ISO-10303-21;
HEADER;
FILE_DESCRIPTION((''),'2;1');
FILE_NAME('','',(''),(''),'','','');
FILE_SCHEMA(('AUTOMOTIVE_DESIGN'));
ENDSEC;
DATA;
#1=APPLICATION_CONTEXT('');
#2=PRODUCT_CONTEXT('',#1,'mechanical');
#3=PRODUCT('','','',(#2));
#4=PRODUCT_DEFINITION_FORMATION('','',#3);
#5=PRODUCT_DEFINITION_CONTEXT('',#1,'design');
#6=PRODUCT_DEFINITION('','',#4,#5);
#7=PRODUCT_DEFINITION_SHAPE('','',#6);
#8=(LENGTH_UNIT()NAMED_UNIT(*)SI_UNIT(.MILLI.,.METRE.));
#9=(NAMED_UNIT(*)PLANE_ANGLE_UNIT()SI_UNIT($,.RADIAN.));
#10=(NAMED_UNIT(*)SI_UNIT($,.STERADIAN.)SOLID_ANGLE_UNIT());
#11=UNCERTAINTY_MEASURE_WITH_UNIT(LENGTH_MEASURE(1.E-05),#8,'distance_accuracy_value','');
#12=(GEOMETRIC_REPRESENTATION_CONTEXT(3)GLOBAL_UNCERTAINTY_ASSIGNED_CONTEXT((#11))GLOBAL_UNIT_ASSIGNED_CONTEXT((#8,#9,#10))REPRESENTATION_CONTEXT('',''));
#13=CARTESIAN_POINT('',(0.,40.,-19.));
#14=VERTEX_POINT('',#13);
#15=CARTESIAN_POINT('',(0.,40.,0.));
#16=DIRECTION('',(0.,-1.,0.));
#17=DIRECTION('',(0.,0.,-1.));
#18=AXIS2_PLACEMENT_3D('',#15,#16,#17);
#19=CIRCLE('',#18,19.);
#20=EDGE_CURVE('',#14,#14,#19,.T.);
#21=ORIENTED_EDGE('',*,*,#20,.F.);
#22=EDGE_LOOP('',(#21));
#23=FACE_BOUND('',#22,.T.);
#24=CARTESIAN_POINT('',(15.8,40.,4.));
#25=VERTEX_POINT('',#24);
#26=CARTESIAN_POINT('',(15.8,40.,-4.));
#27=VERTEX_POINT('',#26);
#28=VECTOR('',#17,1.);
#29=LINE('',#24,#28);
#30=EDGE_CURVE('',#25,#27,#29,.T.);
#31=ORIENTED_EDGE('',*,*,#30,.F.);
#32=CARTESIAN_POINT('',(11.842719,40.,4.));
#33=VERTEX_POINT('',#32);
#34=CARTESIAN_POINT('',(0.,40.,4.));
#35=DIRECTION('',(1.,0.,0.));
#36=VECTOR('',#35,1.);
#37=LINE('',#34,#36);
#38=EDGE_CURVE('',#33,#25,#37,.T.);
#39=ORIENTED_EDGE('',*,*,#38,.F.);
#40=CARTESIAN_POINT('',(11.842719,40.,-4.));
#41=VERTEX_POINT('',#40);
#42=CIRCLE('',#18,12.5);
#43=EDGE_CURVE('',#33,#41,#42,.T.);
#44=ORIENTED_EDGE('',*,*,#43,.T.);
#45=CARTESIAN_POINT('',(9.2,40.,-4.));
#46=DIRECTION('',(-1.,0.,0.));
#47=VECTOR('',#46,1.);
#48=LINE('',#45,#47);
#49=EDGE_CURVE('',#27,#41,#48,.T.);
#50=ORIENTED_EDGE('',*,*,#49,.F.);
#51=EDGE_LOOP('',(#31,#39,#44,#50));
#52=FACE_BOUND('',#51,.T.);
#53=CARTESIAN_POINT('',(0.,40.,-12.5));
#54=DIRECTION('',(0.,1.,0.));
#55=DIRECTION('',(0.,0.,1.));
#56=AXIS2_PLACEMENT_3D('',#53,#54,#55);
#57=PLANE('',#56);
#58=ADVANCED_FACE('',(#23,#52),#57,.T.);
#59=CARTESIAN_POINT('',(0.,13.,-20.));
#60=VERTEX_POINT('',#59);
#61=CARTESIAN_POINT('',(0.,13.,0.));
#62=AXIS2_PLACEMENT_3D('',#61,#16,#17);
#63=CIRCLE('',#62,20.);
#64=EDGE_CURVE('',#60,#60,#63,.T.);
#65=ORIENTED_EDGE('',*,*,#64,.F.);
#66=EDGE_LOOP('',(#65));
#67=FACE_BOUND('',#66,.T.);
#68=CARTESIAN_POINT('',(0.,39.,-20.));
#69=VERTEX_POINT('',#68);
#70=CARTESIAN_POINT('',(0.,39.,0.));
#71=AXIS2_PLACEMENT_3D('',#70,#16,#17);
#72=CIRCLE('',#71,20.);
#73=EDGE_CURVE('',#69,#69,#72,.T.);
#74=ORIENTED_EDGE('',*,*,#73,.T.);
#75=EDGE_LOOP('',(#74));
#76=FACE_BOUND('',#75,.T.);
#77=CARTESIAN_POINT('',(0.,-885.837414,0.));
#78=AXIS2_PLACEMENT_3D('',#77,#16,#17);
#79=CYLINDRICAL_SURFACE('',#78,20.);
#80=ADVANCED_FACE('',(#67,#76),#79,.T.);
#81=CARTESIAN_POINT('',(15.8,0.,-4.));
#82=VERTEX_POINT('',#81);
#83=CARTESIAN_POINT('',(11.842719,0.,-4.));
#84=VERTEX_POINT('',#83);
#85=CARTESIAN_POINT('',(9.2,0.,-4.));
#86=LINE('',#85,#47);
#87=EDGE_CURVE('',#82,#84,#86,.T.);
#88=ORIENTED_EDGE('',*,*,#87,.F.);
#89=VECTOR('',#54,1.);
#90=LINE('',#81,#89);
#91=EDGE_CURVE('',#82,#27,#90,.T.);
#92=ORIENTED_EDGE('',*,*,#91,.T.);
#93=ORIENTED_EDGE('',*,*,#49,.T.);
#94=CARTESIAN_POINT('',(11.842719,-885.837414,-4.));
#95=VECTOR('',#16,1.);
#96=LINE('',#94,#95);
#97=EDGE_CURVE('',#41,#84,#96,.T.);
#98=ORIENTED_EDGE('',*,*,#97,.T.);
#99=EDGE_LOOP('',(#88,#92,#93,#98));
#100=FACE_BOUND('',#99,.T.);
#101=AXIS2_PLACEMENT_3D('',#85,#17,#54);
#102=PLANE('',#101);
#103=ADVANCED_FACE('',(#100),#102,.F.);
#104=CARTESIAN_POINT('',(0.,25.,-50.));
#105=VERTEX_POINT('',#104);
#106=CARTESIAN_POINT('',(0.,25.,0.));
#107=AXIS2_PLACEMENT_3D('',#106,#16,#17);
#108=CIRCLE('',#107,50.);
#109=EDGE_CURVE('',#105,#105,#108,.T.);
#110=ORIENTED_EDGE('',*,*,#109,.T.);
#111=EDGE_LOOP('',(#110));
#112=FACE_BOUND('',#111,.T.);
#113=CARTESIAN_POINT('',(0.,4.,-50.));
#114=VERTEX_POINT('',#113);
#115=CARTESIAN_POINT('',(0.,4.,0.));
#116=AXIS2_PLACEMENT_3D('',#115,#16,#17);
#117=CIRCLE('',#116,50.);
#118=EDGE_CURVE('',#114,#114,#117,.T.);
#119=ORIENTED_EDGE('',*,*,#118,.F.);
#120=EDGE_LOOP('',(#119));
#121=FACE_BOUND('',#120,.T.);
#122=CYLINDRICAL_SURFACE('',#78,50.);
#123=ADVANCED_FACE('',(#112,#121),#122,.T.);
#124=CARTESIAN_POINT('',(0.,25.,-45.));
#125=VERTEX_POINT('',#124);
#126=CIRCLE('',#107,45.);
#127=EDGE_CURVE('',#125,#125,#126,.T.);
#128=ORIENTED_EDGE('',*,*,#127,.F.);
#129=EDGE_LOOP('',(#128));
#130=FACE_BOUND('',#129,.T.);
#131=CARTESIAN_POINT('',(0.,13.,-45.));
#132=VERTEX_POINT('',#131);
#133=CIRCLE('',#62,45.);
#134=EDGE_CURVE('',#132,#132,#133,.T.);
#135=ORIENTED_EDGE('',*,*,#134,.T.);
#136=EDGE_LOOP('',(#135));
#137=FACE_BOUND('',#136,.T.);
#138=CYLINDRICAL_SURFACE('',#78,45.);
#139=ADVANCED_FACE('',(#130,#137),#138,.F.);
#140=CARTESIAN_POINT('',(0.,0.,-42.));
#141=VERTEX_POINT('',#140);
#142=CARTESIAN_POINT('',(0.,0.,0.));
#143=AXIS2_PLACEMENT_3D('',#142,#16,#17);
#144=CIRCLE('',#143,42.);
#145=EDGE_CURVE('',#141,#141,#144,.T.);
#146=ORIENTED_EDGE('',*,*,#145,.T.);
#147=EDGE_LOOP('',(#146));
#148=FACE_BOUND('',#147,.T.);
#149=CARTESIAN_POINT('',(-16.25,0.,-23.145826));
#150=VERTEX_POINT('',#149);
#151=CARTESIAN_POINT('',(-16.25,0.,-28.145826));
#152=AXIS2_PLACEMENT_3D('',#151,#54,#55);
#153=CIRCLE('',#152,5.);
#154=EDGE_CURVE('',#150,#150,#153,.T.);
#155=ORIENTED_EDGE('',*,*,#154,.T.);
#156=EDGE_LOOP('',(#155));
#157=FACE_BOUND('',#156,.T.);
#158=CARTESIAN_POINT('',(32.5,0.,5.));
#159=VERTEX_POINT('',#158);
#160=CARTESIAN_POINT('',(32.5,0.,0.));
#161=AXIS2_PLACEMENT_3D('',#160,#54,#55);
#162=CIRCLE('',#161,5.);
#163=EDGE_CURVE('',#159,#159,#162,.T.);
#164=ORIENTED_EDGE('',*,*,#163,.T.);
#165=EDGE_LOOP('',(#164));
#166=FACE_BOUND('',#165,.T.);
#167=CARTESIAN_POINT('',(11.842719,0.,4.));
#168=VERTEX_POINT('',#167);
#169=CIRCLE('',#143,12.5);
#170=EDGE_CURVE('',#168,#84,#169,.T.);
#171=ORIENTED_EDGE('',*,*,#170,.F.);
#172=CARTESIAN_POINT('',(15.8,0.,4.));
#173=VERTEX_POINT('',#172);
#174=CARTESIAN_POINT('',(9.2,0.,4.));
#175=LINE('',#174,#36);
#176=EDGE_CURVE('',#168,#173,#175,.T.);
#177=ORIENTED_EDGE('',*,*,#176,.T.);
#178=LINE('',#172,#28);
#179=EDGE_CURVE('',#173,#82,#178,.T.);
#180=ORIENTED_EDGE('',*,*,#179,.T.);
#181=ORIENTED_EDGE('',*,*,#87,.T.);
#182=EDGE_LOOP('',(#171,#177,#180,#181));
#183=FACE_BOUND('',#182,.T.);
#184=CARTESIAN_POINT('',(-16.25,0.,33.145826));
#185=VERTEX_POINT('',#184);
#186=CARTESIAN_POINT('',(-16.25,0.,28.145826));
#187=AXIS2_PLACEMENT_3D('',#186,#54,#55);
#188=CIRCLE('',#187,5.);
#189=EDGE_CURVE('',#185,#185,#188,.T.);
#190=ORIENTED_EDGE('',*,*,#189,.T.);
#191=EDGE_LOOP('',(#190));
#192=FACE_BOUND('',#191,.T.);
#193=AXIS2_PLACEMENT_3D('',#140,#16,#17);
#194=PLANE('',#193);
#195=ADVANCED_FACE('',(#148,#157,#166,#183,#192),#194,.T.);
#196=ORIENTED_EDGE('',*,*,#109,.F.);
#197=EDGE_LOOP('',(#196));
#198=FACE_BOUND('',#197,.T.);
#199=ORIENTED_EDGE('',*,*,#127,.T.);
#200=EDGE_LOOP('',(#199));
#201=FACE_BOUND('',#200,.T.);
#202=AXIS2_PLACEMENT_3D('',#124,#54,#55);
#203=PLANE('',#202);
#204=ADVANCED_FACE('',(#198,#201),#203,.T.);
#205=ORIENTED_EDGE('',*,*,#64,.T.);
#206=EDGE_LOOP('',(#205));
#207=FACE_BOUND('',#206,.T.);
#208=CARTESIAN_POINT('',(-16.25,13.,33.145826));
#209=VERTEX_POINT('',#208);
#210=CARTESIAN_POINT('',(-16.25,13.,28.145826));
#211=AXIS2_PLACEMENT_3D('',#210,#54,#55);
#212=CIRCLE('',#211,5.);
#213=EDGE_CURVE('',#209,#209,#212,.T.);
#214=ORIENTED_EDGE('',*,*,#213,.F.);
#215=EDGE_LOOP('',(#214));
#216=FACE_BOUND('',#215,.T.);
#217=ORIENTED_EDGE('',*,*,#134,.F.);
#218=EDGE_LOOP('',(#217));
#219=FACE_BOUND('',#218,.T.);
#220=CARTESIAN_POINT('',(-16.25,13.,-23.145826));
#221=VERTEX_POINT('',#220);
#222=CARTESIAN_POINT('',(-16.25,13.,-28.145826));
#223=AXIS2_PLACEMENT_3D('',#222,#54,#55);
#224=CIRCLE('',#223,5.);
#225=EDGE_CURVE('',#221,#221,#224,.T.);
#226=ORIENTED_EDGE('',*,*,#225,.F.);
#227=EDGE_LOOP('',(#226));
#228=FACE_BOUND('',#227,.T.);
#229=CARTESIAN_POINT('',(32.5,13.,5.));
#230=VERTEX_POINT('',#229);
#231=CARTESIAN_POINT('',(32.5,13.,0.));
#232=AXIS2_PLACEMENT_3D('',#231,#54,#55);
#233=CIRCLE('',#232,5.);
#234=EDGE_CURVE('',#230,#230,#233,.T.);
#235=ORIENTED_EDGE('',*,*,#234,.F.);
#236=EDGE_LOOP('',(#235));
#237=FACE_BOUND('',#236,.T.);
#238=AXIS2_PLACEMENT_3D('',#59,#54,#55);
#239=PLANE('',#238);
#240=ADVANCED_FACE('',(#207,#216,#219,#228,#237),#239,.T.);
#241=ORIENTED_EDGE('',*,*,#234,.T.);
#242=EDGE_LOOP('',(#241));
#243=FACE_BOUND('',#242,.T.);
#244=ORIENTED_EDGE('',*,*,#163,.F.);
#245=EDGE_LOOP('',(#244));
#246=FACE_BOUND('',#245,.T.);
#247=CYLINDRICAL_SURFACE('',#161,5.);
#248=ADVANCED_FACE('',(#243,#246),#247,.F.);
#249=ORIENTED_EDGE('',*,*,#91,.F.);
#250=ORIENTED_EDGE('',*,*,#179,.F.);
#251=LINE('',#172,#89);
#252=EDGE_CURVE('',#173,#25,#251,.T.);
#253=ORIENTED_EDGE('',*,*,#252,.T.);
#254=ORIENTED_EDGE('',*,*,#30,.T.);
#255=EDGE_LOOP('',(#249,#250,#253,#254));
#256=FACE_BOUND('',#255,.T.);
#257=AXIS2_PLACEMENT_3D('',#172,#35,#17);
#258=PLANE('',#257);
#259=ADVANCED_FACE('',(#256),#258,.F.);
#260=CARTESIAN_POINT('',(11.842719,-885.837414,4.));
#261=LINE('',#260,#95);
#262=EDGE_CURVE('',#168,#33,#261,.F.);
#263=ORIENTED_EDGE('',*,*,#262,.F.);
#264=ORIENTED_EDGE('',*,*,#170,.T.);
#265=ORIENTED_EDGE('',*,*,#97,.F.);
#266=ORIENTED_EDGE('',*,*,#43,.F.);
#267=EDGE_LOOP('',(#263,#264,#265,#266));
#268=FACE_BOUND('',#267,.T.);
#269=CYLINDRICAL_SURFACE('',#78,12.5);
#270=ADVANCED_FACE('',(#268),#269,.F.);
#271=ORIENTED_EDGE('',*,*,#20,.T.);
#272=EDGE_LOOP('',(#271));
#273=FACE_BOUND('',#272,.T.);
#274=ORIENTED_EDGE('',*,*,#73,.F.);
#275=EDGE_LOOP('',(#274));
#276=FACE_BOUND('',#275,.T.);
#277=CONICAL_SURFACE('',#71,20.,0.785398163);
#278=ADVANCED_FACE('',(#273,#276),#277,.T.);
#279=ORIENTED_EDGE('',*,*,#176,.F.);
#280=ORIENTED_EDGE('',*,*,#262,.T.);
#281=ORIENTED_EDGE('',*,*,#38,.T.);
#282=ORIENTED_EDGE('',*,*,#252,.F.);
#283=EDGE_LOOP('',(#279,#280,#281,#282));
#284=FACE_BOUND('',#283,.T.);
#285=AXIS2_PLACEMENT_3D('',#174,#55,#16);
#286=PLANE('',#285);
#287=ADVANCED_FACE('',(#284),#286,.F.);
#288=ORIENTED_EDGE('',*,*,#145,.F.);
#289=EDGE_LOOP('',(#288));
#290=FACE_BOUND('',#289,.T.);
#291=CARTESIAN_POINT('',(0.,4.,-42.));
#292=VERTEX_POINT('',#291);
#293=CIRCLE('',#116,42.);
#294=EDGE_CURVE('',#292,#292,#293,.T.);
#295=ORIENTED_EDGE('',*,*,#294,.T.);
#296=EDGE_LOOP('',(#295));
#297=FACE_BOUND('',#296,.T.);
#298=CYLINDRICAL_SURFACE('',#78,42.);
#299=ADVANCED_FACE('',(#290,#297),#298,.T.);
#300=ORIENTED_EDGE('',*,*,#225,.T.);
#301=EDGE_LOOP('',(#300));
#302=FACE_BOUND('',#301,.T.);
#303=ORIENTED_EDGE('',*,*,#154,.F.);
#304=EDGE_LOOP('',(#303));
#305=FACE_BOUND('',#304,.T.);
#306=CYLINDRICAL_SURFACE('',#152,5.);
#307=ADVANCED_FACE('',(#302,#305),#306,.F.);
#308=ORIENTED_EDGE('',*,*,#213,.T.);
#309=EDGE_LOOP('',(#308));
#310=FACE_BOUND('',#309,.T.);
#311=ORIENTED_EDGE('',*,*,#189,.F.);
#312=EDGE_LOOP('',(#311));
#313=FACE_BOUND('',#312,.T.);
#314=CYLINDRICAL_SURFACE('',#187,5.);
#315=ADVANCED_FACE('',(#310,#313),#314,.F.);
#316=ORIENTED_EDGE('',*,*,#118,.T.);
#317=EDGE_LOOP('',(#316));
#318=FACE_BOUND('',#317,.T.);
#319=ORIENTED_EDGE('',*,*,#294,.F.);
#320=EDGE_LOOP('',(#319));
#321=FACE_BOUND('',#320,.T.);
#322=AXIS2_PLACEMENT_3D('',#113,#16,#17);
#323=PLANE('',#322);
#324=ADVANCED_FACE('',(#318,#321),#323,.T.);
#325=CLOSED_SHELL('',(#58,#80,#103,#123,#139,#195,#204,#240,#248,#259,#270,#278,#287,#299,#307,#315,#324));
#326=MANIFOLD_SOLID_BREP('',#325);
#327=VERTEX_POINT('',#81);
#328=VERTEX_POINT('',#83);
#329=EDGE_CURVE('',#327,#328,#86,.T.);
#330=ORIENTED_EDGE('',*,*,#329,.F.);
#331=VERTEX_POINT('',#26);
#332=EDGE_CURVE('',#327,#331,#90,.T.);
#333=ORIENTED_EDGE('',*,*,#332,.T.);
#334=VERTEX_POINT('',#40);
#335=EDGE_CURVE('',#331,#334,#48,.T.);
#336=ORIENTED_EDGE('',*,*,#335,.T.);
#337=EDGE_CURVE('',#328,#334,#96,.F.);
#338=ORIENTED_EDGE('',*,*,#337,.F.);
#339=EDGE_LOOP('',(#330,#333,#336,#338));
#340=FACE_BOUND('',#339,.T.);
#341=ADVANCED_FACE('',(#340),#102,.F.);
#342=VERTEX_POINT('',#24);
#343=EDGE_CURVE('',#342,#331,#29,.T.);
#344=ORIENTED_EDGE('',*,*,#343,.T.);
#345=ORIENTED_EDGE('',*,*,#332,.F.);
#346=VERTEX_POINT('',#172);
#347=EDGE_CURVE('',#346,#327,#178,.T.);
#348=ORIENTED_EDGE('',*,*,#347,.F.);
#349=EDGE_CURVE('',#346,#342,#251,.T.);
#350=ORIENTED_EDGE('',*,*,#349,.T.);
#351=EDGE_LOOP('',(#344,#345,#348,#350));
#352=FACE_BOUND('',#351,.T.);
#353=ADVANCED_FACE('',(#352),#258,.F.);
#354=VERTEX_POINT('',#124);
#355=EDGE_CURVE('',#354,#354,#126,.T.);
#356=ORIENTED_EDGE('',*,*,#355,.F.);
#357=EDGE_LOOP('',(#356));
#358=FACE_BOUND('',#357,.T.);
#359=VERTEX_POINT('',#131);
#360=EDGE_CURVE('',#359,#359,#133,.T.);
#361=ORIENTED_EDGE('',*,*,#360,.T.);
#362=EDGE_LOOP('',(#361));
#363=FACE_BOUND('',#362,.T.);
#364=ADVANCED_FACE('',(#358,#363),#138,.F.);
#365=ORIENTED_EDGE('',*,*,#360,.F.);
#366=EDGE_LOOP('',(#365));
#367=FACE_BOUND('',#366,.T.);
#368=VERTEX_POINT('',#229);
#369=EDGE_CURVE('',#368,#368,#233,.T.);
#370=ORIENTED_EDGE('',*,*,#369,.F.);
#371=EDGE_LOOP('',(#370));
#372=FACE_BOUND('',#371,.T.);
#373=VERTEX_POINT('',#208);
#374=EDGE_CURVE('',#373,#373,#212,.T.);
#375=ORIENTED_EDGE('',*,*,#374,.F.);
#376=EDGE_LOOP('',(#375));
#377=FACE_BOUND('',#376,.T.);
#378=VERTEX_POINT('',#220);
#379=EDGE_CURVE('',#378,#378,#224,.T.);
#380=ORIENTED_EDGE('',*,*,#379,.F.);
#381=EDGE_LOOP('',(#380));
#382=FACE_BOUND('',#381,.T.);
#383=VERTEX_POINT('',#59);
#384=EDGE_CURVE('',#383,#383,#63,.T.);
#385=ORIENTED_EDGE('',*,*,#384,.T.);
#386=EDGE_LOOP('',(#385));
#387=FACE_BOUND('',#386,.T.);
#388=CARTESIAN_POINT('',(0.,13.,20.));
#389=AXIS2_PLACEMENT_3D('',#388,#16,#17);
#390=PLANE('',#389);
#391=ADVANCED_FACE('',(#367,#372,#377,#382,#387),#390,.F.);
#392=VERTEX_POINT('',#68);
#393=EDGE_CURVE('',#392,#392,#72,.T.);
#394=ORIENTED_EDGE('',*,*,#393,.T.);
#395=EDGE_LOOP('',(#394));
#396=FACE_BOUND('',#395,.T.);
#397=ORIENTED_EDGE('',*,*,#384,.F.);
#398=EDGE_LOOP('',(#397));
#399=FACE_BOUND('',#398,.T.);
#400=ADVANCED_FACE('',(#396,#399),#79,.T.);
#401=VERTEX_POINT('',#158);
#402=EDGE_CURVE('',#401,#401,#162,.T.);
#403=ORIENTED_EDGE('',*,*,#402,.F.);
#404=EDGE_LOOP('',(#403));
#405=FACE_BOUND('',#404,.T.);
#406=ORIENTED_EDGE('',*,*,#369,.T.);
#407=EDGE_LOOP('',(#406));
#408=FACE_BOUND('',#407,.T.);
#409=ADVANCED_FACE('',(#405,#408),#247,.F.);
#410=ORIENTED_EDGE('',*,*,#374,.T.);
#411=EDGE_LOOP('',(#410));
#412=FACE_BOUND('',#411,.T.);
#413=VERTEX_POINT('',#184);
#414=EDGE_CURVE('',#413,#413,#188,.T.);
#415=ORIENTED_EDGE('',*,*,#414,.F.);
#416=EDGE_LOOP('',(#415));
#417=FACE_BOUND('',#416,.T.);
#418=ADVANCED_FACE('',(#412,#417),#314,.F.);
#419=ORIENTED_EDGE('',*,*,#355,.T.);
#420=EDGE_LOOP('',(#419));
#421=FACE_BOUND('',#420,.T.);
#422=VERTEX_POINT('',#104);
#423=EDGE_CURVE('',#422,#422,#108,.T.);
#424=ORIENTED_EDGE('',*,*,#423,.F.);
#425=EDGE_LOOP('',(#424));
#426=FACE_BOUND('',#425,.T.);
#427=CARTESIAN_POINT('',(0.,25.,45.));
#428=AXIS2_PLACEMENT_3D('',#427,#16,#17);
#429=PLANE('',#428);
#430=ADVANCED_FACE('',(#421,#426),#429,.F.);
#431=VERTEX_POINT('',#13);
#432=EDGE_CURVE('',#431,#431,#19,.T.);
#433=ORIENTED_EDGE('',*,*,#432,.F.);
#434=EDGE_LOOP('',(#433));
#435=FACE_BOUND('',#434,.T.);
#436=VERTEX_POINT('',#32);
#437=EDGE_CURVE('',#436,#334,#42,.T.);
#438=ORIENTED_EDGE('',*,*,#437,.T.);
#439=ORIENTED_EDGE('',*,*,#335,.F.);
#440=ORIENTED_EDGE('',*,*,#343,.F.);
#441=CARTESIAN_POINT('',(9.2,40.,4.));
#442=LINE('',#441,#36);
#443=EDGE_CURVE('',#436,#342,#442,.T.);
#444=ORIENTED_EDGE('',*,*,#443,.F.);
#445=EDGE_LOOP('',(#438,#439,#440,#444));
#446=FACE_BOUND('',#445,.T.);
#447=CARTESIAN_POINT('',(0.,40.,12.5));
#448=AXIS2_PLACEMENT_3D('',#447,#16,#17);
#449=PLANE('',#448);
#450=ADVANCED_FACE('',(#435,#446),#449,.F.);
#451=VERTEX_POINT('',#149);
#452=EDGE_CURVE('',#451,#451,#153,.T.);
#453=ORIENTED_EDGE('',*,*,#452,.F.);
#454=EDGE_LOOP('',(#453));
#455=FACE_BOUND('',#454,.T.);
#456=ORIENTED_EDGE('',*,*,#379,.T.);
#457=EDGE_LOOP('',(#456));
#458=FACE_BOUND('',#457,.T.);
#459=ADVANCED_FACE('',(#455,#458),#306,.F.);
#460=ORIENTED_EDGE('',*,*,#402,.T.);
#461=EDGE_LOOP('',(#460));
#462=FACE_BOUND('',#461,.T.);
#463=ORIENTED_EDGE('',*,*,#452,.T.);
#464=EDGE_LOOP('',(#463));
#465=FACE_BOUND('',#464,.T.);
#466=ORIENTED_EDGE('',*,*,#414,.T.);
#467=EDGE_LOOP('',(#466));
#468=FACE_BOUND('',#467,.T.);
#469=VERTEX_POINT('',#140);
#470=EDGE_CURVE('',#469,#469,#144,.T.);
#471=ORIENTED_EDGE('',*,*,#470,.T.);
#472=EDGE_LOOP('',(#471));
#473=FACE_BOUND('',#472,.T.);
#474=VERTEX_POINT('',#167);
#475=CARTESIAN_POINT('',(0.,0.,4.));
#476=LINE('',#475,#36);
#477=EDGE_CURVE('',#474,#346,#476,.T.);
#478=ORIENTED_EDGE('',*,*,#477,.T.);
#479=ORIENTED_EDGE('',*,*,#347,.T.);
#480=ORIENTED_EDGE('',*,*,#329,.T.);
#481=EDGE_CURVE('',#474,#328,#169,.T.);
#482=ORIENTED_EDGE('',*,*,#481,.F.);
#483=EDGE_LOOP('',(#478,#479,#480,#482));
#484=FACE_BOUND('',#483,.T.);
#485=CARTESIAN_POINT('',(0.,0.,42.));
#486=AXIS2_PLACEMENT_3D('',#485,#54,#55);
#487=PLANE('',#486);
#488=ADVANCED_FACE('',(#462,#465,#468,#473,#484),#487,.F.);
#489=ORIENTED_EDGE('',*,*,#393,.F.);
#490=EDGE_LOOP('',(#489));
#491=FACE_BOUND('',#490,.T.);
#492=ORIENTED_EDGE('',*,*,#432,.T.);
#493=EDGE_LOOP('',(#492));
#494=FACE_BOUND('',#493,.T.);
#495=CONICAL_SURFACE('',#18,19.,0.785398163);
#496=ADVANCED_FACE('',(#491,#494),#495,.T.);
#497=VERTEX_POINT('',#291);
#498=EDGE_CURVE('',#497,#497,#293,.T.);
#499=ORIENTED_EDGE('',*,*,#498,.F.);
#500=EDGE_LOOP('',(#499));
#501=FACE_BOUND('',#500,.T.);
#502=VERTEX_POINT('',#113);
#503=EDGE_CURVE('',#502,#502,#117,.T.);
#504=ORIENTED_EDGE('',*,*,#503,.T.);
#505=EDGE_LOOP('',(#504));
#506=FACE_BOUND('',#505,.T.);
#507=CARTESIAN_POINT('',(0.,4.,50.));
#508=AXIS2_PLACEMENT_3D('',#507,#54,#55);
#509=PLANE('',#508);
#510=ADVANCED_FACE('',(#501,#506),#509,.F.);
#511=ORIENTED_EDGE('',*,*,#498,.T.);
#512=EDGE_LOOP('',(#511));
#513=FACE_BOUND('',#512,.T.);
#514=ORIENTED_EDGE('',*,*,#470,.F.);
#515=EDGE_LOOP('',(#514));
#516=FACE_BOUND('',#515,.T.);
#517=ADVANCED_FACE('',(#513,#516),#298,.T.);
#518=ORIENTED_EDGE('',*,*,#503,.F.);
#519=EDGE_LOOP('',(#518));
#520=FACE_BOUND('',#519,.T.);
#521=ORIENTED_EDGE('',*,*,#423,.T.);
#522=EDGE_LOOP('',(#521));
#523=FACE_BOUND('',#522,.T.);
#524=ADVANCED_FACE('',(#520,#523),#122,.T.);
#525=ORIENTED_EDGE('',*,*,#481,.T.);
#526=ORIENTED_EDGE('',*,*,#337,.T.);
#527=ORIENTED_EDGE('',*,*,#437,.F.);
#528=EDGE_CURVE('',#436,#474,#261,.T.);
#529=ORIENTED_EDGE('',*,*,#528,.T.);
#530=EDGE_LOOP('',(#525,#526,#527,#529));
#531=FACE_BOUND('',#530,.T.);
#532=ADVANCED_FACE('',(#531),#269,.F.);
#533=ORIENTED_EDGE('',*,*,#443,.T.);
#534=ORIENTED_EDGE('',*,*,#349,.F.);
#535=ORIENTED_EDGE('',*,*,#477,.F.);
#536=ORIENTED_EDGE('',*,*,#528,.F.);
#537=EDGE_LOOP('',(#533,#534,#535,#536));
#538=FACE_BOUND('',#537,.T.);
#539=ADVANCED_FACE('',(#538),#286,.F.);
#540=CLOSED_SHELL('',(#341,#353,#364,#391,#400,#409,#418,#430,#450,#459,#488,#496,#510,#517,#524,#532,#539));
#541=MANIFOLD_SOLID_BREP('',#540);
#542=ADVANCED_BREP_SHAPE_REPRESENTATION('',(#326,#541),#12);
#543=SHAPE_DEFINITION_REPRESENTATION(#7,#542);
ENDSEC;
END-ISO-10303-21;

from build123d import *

# Parameters (mm, degrees)
SKETCH_2_W          = 6.6
SKETCH_2_H          = 8
CUT_EXTRUDE_1_DEPTH = 82.240384046
SKETCH_3_R          = 5
CUT_EXTRUDE_2_DEPTH = 76.690157881


# Read off the part's stored shape, not the designer's step: 旋转1
with BuildPart() as part:
    # 旋转1 outline → 旋转1 (revolve)
    with BuildSketch(Plane.XY):
        Polygon((45, 13), (20, 13), (20, 39), (19, 40), (12.5, 40), (12.5, 0), (42, 0), (42, 4), (50, 4), (50, 25), (45, 25), align=None)
    revolve(axis=Axis((0, 0, 0), (0, 1, 0)))


with BuildPart() as body_2:
    # Revolve 1 2 outline → Revolve 1 2 (revolve)
    with BuildSketch(Plane.XY):
        Polygon((12.5, 40), (12.5, 0), (42, 0), (42, 4), (50, 4), (50, 25), (45, 25), (45, 13), (20, 13), (20, 39), (19, 40), align=None)
    revolve(axis=Axis((0, 0, 0), (0, 1, 0)))


with BuildPart() as cut_extrude_1_tool:
    # 草图2 → 切除-拉伸1 (new, through all)
    with BuildSketch(Plane(origin=(0, 40, 0), x_dir=(1, 0, 0), z_dir=(0, 1, 0))):
        with Locations((12.5, 0)):
            Rectangle(SKETCH_2_W, SKETCH_2_H)
    extrude(amount=-CUT_EXTRUDE_1_DEPTH)


with BuildPart() as part_1:
    add(part.part)

    # 切除-拉伸1: cut by cut_extrude_1_tool
    add(cut_extrude_1_tool.part, mode=Mode.SUBTRACT)


with BuildPart() as body_2_1:
    add(body_2.part)

    # 切除-拉伸1: cut by cut_extrude_1_tool
    add(cut_extrude_1_tool.part, mode=Mode.SUBTRACT)


with BuildPart() as cut_extrude_2_tool:
    # 草图3 → 切除-拉伸2 (new, through all)
    with BuildSketch(Plane(origin=(0, 13, 0), x_dir=(1, 0, 0), z_dir=(0, 1, 0))):
        with Locations(Location((32.5, 0, 0), (0, 0, 270))):
            Circle(SKETCH_3_R)
        with Locations(Location((-16.25, -28.145825623, 0), (0, 0, 270))):
            Circle(SKETCH_3_R)
        with Locations(Location((-16.25, 28.145825623, 0), (0, 0, 270))):
            Circle(SKETCH_3_R)
    extrude(amount=-CUT_EXTRUDE_2_DEPTH)


with BuildPart() as part_2:
    add(part_1.part)

    # 切除-拉伸2: cut by cut_extrude_2_tool
    add(cut_extrude_2_tool.part, mode=Mode.SUBTRACT)


with BuildPart() as body_2_2:
    add(body_2_1.part)

    # 切除-拉伸2: cut by cut_extrude_2_tool
    add(cut_extrude_2_tool.part, mode=Mode.SUBTRACT)


solid = Compound([part_2.part, body_2_2.part])
